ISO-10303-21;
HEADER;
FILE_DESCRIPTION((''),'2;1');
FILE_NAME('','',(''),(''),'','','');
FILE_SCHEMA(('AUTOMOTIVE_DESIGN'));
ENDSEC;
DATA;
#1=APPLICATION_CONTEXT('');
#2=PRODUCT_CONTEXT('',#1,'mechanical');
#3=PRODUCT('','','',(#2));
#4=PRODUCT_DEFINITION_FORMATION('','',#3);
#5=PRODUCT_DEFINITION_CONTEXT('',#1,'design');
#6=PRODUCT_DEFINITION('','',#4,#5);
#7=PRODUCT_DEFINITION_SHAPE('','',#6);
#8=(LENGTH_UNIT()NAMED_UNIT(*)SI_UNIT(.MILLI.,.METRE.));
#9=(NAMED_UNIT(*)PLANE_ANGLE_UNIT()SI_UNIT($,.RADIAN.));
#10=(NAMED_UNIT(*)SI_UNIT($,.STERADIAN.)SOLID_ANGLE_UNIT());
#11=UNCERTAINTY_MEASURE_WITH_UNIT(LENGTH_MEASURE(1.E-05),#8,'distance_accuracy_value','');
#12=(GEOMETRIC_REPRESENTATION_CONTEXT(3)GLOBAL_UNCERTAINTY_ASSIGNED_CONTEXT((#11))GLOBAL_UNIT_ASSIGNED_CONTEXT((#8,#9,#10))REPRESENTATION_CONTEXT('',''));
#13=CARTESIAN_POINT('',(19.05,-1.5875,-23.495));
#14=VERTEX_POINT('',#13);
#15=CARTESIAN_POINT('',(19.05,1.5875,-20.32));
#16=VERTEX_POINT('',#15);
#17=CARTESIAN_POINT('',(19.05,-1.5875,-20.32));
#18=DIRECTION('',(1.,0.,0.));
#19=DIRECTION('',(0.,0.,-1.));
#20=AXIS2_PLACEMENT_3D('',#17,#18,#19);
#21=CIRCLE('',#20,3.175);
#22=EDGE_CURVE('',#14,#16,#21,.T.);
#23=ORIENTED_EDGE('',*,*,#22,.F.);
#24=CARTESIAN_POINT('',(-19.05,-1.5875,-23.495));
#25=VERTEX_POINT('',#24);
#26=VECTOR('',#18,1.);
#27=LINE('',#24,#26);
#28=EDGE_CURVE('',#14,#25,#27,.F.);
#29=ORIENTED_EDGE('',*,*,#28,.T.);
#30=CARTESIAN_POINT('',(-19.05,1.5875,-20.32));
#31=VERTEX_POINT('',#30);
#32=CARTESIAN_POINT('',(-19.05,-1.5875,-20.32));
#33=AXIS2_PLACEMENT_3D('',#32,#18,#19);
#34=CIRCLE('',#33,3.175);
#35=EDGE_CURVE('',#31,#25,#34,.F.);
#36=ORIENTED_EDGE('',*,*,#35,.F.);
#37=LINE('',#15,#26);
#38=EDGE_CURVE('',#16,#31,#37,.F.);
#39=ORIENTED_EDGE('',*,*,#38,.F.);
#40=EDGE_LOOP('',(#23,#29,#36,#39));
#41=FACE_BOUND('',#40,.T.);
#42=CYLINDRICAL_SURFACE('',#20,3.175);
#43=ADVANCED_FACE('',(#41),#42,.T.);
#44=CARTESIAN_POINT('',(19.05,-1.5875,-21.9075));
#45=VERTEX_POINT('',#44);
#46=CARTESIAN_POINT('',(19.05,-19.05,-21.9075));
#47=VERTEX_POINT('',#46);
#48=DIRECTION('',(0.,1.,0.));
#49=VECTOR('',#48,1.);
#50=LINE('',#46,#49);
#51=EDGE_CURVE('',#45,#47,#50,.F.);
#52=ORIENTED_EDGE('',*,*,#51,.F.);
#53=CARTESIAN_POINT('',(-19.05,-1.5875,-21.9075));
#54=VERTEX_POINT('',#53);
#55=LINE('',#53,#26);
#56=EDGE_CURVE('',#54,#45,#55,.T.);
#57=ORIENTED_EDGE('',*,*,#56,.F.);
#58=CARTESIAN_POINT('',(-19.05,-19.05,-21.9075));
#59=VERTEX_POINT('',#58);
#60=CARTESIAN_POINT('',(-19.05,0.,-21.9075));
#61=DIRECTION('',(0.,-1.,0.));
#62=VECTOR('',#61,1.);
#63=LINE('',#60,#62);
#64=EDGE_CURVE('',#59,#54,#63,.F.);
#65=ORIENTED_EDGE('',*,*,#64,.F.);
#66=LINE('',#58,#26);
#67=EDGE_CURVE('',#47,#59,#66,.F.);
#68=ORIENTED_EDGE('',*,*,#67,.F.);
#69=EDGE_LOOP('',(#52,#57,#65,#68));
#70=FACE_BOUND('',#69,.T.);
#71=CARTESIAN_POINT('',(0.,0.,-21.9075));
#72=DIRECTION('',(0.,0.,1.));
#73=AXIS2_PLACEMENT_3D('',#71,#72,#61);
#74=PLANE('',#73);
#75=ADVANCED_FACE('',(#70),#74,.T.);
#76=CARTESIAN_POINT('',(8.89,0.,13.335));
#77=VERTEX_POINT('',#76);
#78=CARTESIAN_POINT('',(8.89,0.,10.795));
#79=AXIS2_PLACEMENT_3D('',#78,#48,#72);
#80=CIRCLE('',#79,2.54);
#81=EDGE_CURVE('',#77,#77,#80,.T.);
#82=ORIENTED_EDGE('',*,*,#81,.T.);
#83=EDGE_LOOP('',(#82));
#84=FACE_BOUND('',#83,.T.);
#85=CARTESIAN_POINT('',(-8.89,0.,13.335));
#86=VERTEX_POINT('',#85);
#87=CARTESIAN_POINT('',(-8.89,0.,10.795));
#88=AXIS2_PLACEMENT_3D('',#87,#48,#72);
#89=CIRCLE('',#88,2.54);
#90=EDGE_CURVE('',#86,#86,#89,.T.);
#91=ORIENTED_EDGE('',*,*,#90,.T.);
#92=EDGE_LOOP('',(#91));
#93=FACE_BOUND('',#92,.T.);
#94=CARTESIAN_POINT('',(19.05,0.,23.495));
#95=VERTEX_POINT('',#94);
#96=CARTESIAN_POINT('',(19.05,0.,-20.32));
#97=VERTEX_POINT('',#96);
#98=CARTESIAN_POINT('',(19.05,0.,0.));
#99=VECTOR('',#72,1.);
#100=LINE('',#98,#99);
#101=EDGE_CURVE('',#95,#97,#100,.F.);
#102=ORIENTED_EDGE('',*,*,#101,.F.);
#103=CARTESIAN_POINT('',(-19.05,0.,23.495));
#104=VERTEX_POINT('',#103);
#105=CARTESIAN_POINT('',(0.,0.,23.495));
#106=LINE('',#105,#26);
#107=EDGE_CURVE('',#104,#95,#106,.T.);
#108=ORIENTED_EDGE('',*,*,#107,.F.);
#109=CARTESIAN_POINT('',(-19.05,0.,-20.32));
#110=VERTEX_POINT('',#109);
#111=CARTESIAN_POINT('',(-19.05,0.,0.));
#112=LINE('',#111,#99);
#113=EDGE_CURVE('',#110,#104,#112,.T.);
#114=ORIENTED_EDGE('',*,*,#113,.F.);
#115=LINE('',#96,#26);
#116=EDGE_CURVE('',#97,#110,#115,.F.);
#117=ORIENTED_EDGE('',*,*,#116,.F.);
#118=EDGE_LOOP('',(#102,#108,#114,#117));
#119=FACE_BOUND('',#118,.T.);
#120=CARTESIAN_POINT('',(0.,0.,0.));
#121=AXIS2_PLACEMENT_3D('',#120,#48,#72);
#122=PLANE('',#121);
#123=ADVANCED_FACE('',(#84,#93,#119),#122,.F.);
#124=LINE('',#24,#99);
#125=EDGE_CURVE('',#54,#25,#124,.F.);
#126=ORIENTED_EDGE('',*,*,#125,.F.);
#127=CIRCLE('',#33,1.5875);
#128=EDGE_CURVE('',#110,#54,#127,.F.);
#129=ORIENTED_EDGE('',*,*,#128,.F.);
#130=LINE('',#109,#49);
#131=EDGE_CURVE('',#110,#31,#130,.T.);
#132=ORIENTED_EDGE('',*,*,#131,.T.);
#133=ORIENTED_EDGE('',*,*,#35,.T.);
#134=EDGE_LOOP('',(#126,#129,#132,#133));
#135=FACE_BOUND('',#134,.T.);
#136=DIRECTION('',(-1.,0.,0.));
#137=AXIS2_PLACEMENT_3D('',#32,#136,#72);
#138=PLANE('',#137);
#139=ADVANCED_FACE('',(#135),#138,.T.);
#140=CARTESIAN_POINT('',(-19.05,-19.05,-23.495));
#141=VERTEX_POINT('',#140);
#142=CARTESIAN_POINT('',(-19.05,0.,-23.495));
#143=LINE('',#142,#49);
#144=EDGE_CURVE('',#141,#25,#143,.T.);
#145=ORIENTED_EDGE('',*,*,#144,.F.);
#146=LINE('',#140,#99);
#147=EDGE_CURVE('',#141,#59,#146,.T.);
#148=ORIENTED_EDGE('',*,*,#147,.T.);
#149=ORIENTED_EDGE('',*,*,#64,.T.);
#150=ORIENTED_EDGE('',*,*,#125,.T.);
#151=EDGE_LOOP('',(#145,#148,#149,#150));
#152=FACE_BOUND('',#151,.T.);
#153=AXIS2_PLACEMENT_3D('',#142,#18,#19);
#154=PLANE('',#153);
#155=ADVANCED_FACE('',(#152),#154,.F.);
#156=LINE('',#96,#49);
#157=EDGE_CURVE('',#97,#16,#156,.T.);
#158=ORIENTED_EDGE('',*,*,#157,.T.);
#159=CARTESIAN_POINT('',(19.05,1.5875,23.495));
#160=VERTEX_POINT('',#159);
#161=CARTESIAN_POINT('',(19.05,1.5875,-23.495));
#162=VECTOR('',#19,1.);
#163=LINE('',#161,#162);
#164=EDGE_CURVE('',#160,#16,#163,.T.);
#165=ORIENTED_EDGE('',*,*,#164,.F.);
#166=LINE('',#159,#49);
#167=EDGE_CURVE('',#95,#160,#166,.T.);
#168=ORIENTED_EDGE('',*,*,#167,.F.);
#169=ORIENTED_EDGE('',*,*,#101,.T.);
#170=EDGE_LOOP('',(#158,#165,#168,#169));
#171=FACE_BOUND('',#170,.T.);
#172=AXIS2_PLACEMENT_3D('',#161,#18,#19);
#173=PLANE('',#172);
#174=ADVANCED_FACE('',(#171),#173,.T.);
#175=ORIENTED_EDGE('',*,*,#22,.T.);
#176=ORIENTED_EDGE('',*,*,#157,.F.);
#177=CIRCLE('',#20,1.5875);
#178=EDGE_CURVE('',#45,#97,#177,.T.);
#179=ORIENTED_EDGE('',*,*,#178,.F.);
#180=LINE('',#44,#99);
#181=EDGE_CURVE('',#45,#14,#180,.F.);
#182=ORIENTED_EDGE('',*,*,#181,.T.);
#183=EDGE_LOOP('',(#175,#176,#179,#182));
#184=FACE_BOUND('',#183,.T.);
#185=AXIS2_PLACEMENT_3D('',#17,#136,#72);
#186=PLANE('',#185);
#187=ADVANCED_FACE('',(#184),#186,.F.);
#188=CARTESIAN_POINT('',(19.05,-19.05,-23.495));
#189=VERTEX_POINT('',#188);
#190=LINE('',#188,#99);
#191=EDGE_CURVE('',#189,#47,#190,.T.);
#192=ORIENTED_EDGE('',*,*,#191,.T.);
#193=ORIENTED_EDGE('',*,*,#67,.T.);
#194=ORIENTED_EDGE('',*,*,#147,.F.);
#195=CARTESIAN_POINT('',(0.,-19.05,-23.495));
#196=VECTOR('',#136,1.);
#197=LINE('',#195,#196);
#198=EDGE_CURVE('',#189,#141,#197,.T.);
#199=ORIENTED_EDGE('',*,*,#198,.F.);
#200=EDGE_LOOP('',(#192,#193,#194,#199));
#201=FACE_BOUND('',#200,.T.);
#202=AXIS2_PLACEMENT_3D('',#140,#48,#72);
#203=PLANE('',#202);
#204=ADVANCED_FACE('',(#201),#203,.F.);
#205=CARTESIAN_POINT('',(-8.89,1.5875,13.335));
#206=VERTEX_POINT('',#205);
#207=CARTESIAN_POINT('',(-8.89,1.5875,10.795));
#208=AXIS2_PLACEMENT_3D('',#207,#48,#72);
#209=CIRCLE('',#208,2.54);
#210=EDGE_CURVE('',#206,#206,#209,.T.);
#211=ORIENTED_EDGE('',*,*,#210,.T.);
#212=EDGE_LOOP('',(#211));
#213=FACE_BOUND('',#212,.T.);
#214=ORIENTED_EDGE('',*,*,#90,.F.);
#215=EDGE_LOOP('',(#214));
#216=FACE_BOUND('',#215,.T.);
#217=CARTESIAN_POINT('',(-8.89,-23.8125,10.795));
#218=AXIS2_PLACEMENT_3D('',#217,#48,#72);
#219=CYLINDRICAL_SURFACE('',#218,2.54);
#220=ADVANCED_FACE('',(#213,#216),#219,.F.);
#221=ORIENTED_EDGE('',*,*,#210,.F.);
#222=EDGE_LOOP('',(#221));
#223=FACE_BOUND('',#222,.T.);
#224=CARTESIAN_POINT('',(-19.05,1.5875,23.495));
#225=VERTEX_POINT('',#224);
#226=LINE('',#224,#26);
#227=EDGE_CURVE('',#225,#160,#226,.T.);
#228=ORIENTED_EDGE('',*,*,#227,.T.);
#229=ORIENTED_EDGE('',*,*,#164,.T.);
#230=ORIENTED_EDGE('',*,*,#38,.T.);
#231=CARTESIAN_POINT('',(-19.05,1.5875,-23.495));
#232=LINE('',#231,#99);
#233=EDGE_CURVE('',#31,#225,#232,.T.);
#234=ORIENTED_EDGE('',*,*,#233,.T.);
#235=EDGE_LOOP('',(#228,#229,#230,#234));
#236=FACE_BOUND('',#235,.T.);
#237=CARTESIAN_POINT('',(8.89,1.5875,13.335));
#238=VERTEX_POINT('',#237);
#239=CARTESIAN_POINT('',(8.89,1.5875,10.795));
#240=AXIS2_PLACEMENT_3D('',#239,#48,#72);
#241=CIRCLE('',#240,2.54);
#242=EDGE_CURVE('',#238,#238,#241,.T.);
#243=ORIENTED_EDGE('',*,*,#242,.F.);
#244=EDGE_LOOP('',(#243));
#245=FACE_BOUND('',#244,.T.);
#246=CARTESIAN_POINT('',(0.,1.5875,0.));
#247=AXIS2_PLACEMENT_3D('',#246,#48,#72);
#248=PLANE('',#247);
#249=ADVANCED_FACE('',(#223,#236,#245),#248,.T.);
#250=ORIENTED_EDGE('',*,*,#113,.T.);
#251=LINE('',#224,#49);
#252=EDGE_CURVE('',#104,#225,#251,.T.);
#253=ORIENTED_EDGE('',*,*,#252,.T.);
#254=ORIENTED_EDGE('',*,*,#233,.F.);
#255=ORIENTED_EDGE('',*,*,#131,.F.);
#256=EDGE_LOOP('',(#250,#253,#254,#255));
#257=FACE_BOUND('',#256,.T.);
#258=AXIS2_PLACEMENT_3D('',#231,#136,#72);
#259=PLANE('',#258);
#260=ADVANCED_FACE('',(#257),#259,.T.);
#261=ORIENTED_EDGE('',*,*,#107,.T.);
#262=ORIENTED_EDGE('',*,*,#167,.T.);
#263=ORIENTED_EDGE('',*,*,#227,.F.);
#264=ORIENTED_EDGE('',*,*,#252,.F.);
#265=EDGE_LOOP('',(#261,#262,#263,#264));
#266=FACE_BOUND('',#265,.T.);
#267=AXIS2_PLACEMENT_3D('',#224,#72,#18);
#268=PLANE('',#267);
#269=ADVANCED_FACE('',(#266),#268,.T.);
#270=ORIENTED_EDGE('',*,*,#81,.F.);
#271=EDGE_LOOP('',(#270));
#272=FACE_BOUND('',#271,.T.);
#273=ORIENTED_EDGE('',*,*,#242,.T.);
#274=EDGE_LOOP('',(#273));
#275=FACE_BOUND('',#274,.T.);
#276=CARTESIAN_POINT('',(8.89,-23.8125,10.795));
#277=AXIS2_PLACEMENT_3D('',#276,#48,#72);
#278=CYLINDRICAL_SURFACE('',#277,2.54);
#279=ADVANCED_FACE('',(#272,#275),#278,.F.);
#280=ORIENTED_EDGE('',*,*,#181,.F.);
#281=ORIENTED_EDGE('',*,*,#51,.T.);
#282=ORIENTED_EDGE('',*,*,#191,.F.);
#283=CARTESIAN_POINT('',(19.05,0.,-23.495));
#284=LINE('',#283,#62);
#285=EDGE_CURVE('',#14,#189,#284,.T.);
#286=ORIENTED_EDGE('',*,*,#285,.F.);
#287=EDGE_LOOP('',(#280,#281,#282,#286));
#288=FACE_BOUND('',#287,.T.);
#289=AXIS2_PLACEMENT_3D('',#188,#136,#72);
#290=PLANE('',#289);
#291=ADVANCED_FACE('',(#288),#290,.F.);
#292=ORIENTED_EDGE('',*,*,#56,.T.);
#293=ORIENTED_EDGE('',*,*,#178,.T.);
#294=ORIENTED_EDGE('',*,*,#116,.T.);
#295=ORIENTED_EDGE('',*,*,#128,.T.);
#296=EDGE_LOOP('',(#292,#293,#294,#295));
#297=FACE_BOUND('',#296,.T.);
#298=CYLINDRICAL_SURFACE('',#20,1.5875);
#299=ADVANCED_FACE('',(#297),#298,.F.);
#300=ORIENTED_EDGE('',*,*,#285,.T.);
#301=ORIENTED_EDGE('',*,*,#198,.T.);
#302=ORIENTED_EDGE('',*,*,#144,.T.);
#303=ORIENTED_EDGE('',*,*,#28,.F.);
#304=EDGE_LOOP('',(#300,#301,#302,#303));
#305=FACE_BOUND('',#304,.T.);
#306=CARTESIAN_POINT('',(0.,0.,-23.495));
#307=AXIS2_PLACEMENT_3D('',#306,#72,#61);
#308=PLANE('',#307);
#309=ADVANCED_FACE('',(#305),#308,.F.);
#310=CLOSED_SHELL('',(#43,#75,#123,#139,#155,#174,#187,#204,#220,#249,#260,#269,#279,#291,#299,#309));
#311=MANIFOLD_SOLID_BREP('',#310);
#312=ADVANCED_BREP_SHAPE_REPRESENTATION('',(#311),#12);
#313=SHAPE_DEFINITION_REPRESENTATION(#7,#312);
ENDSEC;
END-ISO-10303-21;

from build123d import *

# Parameters (mm, degrees)
SKETCH1_W                    = 38.1
SKETCH1_H                    = 46.99
BOSS_EXTRUDE1_DEPTH          = 1.5875
EDGE_FLANGE1_STRIP_W         = 9.525
EDGE_FLANGE1_STRIP_H         = 1.5875
EDGE_FLANGE1_STRIP_CUT_DEPTH = 38.1
EDGE_FLANGE1_DEPTH           = 38.1
SKETCH13_R                   = 2.54
CUT_EXTRUDE1_DEPTH           = 25.4


# Sheet-metal steps are written as plain solids
with BuildPart() as part:
    # Sketch1 → Boss-Extrude1 (new body)
    with BuildSketch(Plane(origin=(0, 0, 0), x_dir=(1, 0, 0), z_dir=(0, 1, 0))):
        Rectangle(SKETCH1_W, SKETCH1_H)
    extrude(amount=BOSS_EXTRUDE1_DEPTH)

    # Edge-Flange1 strip (across the edge) → Edge-Flange1 strip cut (cut)
    with BuildSketch(Plane(origin=(-19.05, 0, -23.495), x_dir=(0, 0, 1), z_dir=(1, 0, 0))):
        with Locations((-1.5875, -0.79375)):
            Rectangle(EDGE_FLANGE1_STRIP_W, EDGE_FLANGE1_STRIP_H)
    extrude(amount=EDGE_FLANGE1_STRIP_CUT_DEPTH, mode=Mode.SUBTRACT)

    # Edge-Flange1 section (across the edge) → Edge-Flange1 (add)
    with BuildSketch(Plane(origin=(-19.05, 0, -23.495), x_dir=(0, 0, 1), z_dir=(1, 0, 0))):
        with BuildLine():
            Line((0, 1.5875), (0, 19.05))
            Line((0, 19.05), (1.5875, 19.05))
            Line((1.5875, 19.05), (1.5875, 1.5875))
            ThreePointArc((1.5875, 1.5875), (2.052467985, 0.464967985), (3.175, 0))
            Line((3.175, 0), (3.175, -1.5875))
            ThreePointArc((3.175, -1.5875), (0.92993597, -0.65756403), (0, 1.5875))
        make_face()
    extrude(amount=EDGE_FLANGE1_DEPTH)

    # Sketch13 → Cut-Extrude1 (cut)
    with BuildSketch(Plane(origin=(0, 1.5875, 0), x_dir=(1, 0, 0), z_dir=(0, 1, 0))):
        with Locations(Location((8.89, -10.795, 0), (0, 0, 270))):
            Circle(SKETCH13_R)
        with Locations(Location((-8.89, -10.795, 0), (0, 0, 270))):
            Circle(SKETCH13_R)
    extrude(amount=-CUT_EXTRUDE1_DEPTH, mode=Mode.SUBTRACT)


solid = part.part
